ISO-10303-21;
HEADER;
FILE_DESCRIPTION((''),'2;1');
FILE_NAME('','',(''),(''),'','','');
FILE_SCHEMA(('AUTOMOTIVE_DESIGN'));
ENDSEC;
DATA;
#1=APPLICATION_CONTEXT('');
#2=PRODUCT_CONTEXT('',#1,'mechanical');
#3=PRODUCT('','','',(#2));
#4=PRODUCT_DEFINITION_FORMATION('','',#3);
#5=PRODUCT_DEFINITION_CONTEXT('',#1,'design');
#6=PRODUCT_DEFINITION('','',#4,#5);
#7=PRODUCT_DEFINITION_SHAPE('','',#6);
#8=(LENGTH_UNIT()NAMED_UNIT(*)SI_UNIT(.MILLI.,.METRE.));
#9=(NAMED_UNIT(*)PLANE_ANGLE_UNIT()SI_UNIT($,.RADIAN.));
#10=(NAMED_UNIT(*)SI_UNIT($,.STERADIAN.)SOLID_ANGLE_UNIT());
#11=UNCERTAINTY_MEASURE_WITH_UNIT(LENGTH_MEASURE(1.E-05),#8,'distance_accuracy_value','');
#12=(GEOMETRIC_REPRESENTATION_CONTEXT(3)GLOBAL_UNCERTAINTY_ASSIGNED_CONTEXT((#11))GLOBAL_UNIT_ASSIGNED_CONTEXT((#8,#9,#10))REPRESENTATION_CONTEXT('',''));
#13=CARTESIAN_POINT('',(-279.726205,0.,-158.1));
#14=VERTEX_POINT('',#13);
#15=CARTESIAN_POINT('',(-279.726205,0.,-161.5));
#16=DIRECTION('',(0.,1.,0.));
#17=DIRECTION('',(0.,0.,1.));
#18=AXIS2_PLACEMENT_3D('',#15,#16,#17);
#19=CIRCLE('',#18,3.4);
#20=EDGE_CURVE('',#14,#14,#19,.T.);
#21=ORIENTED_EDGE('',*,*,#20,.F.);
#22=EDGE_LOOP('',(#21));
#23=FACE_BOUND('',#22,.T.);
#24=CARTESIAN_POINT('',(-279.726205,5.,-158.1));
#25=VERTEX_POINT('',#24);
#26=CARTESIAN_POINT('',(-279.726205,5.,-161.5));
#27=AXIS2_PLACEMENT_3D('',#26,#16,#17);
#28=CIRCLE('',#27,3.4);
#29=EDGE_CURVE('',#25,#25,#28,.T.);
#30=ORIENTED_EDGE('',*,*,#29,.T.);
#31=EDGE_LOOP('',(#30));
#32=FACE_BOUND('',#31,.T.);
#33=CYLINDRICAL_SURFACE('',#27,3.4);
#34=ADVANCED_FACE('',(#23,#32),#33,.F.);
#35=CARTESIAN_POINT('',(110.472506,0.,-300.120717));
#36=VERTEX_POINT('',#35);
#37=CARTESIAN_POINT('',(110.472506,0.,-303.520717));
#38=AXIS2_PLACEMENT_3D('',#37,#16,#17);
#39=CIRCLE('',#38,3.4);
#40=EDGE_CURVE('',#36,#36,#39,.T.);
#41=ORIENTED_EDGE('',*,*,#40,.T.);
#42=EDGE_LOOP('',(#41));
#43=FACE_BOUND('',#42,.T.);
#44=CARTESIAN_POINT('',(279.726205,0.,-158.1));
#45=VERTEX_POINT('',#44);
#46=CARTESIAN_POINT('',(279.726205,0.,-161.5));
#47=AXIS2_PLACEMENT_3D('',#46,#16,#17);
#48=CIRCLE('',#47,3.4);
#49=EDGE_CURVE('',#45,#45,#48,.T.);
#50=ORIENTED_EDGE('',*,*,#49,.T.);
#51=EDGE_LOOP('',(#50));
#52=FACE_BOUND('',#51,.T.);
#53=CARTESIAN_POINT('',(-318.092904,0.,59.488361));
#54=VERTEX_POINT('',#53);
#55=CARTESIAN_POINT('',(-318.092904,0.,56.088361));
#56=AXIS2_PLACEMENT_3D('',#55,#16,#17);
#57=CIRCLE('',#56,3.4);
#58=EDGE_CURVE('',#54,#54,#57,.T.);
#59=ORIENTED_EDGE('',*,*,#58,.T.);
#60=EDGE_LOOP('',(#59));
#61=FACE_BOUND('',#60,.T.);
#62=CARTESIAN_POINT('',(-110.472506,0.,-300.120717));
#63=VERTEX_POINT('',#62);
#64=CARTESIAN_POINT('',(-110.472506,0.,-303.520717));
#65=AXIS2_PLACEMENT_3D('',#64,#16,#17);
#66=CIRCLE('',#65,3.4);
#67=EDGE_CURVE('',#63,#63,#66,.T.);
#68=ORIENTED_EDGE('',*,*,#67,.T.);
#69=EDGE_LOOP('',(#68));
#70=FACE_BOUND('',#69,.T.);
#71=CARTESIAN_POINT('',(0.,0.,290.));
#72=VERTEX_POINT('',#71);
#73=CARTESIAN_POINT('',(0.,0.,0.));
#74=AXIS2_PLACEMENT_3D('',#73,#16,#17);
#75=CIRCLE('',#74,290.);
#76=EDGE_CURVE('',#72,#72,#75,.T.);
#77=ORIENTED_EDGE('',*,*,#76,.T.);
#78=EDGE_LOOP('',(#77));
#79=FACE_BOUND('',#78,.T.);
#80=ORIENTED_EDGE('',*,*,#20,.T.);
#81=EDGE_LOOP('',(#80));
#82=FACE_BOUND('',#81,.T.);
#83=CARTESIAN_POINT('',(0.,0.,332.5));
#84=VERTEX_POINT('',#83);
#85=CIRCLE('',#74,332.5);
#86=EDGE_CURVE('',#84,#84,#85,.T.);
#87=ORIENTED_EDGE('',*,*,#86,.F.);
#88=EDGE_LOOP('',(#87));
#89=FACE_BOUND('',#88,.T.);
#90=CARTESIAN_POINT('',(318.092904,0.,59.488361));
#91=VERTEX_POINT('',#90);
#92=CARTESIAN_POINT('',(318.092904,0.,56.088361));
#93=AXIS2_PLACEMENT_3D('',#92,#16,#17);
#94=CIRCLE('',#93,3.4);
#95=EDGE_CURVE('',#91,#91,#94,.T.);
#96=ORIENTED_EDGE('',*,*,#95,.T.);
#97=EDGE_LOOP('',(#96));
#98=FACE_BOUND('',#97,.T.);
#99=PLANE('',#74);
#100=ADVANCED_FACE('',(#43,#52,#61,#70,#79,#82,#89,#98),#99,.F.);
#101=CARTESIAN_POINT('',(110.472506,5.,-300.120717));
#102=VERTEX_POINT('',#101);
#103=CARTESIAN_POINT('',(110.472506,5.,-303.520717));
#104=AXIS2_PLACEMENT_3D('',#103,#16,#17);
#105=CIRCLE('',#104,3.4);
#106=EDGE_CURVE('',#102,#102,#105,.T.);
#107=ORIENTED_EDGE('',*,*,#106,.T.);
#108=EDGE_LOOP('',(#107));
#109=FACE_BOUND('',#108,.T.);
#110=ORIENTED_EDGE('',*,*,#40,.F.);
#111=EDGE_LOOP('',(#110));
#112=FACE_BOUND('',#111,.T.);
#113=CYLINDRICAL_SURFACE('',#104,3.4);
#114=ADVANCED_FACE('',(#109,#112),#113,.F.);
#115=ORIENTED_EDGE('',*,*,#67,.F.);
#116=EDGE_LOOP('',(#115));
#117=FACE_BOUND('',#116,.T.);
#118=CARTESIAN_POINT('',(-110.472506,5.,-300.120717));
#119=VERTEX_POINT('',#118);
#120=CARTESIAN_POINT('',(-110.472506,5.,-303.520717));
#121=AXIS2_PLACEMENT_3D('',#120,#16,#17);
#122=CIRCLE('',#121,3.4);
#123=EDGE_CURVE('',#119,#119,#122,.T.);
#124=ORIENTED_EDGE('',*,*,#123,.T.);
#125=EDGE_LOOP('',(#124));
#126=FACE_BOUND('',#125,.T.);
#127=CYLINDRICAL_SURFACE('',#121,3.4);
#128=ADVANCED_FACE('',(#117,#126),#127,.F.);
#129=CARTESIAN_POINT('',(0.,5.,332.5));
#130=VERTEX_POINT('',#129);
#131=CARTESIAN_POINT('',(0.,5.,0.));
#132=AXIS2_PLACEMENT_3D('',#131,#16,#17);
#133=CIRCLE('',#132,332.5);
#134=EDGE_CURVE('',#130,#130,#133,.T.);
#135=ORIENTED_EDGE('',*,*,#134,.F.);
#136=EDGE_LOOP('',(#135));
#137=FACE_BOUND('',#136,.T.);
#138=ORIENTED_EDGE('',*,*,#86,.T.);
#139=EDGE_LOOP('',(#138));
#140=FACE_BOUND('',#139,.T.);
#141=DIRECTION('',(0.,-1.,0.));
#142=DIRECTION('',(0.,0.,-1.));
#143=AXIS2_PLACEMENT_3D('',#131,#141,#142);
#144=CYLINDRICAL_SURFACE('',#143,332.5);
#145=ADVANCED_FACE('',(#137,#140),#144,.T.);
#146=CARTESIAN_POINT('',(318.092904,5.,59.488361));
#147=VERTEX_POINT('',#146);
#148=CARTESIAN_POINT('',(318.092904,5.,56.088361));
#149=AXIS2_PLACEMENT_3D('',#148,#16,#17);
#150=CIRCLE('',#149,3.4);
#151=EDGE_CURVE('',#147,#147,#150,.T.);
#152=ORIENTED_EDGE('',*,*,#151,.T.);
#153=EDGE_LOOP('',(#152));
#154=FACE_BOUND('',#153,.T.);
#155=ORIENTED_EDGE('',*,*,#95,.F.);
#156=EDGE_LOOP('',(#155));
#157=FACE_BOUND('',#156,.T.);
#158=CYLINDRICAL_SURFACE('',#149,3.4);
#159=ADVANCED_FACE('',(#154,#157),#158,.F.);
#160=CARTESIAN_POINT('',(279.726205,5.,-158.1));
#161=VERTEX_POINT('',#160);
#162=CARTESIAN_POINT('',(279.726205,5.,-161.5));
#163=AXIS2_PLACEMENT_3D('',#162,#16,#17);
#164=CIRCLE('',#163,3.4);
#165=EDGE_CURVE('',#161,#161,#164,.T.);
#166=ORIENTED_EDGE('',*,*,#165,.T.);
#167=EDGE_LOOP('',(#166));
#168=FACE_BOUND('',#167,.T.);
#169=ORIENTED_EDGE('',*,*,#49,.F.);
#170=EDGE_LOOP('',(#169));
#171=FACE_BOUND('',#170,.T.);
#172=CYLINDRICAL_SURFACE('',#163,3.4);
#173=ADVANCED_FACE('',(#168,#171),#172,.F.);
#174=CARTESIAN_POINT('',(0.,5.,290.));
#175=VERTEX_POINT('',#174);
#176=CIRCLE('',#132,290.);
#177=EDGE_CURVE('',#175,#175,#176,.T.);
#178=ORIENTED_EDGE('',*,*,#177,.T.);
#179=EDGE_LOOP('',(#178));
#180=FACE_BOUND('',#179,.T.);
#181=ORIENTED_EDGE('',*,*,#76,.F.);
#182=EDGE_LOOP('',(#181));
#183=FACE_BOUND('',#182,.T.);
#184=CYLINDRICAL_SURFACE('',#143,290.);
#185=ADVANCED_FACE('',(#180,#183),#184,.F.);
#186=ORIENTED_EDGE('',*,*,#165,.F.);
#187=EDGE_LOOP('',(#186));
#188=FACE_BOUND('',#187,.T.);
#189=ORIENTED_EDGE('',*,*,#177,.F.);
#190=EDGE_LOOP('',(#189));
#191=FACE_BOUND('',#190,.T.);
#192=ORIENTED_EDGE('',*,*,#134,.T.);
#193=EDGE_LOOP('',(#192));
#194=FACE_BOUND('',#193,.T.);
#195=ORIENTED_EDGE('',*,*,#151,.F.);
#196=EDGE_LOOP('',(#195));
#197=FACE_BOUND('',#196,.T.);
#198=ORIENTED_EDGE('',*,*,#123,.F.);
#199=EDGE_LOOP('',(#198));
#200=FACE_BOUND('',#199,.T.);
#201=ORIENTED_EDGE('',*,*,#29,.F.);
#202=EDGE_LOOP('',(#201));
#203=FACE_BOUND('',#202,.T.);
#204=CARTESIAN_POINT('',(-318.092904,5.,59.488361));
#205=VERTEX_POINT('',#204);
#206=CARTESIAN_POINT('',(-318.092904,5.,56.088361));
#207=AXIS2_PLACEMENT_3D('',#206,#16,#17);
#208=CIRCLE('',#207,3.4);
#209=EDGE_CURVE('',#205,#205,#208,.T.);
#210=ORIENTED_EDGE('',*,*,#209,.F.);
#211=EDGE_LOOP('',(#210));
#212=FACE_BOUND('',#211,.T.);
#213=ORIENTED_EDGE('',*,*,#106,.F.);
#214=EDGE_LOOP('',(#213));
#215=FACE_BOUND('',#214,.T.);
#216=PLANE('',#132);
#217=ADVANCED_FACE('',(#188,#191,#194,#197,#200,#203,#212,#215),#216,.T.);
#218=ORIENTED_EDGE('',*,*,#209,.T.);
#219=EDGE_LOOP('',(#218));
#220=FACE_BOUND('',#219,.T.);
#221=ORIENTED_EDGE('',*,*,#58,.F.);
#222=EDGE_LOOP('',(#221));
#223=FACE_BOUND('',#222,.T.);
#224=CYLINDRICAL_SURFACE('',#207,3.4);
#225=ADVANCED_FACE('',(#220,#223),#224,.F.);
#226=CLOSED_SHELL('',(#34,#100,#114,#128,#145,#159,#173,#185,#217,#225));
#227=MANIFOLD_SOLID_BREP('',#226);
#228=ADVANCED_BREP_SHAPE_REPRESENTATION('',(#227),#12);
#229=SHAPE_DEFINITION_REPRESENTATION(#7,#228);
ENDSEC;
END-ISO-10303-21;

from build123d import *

# Parameters (mm, degrees)
SKIZZE1_R            = 332.5
SKIZZE1_R_2          = 290
BASIS_BLECH1_DEPTH   = 5
M8_GEWINDEBOHRUNG1_D = 6.8


# Sheet-metal steps are written as plain solids
with BuildPart() as part:
    # Skizze1 → Basis-Blech1 (new body)
    with BuildSketch(Plane(origin=(0, 0, 0), x_dir=(1, 0, 0), z_dir=(0, 1, 0))):
        with Locations(Location((0, 0, 0), (0, 0, 270))):
            Circle(SKIZZE1_R)
        with Locations(Location((0, 0, 0), (0, 0, 270))):
            Circle(SKIZZE1_R_2, mode=Mode.SUBTRACT)
    extrude(amount=BASIS_BLECH1_DEPTH)

    # M8 Gewindebohrung1 (through all)
    with Locations(Plane(origin=(0, 5, 0), x_dir=(1, 0, 0), z_dir=(0, 1, 0))):
        with Locations((-318.092904223, -56.088361386), (-279.726205422, 161.5), (-110.472506294, 303.520716514), (110.472506294, 303.520716514), (279.726205422, 161.5), (318.092904223, -56.088361386)):
            Hole(M8_GEWINDEBOHRUNG1_D / 2)


solid = part.part
